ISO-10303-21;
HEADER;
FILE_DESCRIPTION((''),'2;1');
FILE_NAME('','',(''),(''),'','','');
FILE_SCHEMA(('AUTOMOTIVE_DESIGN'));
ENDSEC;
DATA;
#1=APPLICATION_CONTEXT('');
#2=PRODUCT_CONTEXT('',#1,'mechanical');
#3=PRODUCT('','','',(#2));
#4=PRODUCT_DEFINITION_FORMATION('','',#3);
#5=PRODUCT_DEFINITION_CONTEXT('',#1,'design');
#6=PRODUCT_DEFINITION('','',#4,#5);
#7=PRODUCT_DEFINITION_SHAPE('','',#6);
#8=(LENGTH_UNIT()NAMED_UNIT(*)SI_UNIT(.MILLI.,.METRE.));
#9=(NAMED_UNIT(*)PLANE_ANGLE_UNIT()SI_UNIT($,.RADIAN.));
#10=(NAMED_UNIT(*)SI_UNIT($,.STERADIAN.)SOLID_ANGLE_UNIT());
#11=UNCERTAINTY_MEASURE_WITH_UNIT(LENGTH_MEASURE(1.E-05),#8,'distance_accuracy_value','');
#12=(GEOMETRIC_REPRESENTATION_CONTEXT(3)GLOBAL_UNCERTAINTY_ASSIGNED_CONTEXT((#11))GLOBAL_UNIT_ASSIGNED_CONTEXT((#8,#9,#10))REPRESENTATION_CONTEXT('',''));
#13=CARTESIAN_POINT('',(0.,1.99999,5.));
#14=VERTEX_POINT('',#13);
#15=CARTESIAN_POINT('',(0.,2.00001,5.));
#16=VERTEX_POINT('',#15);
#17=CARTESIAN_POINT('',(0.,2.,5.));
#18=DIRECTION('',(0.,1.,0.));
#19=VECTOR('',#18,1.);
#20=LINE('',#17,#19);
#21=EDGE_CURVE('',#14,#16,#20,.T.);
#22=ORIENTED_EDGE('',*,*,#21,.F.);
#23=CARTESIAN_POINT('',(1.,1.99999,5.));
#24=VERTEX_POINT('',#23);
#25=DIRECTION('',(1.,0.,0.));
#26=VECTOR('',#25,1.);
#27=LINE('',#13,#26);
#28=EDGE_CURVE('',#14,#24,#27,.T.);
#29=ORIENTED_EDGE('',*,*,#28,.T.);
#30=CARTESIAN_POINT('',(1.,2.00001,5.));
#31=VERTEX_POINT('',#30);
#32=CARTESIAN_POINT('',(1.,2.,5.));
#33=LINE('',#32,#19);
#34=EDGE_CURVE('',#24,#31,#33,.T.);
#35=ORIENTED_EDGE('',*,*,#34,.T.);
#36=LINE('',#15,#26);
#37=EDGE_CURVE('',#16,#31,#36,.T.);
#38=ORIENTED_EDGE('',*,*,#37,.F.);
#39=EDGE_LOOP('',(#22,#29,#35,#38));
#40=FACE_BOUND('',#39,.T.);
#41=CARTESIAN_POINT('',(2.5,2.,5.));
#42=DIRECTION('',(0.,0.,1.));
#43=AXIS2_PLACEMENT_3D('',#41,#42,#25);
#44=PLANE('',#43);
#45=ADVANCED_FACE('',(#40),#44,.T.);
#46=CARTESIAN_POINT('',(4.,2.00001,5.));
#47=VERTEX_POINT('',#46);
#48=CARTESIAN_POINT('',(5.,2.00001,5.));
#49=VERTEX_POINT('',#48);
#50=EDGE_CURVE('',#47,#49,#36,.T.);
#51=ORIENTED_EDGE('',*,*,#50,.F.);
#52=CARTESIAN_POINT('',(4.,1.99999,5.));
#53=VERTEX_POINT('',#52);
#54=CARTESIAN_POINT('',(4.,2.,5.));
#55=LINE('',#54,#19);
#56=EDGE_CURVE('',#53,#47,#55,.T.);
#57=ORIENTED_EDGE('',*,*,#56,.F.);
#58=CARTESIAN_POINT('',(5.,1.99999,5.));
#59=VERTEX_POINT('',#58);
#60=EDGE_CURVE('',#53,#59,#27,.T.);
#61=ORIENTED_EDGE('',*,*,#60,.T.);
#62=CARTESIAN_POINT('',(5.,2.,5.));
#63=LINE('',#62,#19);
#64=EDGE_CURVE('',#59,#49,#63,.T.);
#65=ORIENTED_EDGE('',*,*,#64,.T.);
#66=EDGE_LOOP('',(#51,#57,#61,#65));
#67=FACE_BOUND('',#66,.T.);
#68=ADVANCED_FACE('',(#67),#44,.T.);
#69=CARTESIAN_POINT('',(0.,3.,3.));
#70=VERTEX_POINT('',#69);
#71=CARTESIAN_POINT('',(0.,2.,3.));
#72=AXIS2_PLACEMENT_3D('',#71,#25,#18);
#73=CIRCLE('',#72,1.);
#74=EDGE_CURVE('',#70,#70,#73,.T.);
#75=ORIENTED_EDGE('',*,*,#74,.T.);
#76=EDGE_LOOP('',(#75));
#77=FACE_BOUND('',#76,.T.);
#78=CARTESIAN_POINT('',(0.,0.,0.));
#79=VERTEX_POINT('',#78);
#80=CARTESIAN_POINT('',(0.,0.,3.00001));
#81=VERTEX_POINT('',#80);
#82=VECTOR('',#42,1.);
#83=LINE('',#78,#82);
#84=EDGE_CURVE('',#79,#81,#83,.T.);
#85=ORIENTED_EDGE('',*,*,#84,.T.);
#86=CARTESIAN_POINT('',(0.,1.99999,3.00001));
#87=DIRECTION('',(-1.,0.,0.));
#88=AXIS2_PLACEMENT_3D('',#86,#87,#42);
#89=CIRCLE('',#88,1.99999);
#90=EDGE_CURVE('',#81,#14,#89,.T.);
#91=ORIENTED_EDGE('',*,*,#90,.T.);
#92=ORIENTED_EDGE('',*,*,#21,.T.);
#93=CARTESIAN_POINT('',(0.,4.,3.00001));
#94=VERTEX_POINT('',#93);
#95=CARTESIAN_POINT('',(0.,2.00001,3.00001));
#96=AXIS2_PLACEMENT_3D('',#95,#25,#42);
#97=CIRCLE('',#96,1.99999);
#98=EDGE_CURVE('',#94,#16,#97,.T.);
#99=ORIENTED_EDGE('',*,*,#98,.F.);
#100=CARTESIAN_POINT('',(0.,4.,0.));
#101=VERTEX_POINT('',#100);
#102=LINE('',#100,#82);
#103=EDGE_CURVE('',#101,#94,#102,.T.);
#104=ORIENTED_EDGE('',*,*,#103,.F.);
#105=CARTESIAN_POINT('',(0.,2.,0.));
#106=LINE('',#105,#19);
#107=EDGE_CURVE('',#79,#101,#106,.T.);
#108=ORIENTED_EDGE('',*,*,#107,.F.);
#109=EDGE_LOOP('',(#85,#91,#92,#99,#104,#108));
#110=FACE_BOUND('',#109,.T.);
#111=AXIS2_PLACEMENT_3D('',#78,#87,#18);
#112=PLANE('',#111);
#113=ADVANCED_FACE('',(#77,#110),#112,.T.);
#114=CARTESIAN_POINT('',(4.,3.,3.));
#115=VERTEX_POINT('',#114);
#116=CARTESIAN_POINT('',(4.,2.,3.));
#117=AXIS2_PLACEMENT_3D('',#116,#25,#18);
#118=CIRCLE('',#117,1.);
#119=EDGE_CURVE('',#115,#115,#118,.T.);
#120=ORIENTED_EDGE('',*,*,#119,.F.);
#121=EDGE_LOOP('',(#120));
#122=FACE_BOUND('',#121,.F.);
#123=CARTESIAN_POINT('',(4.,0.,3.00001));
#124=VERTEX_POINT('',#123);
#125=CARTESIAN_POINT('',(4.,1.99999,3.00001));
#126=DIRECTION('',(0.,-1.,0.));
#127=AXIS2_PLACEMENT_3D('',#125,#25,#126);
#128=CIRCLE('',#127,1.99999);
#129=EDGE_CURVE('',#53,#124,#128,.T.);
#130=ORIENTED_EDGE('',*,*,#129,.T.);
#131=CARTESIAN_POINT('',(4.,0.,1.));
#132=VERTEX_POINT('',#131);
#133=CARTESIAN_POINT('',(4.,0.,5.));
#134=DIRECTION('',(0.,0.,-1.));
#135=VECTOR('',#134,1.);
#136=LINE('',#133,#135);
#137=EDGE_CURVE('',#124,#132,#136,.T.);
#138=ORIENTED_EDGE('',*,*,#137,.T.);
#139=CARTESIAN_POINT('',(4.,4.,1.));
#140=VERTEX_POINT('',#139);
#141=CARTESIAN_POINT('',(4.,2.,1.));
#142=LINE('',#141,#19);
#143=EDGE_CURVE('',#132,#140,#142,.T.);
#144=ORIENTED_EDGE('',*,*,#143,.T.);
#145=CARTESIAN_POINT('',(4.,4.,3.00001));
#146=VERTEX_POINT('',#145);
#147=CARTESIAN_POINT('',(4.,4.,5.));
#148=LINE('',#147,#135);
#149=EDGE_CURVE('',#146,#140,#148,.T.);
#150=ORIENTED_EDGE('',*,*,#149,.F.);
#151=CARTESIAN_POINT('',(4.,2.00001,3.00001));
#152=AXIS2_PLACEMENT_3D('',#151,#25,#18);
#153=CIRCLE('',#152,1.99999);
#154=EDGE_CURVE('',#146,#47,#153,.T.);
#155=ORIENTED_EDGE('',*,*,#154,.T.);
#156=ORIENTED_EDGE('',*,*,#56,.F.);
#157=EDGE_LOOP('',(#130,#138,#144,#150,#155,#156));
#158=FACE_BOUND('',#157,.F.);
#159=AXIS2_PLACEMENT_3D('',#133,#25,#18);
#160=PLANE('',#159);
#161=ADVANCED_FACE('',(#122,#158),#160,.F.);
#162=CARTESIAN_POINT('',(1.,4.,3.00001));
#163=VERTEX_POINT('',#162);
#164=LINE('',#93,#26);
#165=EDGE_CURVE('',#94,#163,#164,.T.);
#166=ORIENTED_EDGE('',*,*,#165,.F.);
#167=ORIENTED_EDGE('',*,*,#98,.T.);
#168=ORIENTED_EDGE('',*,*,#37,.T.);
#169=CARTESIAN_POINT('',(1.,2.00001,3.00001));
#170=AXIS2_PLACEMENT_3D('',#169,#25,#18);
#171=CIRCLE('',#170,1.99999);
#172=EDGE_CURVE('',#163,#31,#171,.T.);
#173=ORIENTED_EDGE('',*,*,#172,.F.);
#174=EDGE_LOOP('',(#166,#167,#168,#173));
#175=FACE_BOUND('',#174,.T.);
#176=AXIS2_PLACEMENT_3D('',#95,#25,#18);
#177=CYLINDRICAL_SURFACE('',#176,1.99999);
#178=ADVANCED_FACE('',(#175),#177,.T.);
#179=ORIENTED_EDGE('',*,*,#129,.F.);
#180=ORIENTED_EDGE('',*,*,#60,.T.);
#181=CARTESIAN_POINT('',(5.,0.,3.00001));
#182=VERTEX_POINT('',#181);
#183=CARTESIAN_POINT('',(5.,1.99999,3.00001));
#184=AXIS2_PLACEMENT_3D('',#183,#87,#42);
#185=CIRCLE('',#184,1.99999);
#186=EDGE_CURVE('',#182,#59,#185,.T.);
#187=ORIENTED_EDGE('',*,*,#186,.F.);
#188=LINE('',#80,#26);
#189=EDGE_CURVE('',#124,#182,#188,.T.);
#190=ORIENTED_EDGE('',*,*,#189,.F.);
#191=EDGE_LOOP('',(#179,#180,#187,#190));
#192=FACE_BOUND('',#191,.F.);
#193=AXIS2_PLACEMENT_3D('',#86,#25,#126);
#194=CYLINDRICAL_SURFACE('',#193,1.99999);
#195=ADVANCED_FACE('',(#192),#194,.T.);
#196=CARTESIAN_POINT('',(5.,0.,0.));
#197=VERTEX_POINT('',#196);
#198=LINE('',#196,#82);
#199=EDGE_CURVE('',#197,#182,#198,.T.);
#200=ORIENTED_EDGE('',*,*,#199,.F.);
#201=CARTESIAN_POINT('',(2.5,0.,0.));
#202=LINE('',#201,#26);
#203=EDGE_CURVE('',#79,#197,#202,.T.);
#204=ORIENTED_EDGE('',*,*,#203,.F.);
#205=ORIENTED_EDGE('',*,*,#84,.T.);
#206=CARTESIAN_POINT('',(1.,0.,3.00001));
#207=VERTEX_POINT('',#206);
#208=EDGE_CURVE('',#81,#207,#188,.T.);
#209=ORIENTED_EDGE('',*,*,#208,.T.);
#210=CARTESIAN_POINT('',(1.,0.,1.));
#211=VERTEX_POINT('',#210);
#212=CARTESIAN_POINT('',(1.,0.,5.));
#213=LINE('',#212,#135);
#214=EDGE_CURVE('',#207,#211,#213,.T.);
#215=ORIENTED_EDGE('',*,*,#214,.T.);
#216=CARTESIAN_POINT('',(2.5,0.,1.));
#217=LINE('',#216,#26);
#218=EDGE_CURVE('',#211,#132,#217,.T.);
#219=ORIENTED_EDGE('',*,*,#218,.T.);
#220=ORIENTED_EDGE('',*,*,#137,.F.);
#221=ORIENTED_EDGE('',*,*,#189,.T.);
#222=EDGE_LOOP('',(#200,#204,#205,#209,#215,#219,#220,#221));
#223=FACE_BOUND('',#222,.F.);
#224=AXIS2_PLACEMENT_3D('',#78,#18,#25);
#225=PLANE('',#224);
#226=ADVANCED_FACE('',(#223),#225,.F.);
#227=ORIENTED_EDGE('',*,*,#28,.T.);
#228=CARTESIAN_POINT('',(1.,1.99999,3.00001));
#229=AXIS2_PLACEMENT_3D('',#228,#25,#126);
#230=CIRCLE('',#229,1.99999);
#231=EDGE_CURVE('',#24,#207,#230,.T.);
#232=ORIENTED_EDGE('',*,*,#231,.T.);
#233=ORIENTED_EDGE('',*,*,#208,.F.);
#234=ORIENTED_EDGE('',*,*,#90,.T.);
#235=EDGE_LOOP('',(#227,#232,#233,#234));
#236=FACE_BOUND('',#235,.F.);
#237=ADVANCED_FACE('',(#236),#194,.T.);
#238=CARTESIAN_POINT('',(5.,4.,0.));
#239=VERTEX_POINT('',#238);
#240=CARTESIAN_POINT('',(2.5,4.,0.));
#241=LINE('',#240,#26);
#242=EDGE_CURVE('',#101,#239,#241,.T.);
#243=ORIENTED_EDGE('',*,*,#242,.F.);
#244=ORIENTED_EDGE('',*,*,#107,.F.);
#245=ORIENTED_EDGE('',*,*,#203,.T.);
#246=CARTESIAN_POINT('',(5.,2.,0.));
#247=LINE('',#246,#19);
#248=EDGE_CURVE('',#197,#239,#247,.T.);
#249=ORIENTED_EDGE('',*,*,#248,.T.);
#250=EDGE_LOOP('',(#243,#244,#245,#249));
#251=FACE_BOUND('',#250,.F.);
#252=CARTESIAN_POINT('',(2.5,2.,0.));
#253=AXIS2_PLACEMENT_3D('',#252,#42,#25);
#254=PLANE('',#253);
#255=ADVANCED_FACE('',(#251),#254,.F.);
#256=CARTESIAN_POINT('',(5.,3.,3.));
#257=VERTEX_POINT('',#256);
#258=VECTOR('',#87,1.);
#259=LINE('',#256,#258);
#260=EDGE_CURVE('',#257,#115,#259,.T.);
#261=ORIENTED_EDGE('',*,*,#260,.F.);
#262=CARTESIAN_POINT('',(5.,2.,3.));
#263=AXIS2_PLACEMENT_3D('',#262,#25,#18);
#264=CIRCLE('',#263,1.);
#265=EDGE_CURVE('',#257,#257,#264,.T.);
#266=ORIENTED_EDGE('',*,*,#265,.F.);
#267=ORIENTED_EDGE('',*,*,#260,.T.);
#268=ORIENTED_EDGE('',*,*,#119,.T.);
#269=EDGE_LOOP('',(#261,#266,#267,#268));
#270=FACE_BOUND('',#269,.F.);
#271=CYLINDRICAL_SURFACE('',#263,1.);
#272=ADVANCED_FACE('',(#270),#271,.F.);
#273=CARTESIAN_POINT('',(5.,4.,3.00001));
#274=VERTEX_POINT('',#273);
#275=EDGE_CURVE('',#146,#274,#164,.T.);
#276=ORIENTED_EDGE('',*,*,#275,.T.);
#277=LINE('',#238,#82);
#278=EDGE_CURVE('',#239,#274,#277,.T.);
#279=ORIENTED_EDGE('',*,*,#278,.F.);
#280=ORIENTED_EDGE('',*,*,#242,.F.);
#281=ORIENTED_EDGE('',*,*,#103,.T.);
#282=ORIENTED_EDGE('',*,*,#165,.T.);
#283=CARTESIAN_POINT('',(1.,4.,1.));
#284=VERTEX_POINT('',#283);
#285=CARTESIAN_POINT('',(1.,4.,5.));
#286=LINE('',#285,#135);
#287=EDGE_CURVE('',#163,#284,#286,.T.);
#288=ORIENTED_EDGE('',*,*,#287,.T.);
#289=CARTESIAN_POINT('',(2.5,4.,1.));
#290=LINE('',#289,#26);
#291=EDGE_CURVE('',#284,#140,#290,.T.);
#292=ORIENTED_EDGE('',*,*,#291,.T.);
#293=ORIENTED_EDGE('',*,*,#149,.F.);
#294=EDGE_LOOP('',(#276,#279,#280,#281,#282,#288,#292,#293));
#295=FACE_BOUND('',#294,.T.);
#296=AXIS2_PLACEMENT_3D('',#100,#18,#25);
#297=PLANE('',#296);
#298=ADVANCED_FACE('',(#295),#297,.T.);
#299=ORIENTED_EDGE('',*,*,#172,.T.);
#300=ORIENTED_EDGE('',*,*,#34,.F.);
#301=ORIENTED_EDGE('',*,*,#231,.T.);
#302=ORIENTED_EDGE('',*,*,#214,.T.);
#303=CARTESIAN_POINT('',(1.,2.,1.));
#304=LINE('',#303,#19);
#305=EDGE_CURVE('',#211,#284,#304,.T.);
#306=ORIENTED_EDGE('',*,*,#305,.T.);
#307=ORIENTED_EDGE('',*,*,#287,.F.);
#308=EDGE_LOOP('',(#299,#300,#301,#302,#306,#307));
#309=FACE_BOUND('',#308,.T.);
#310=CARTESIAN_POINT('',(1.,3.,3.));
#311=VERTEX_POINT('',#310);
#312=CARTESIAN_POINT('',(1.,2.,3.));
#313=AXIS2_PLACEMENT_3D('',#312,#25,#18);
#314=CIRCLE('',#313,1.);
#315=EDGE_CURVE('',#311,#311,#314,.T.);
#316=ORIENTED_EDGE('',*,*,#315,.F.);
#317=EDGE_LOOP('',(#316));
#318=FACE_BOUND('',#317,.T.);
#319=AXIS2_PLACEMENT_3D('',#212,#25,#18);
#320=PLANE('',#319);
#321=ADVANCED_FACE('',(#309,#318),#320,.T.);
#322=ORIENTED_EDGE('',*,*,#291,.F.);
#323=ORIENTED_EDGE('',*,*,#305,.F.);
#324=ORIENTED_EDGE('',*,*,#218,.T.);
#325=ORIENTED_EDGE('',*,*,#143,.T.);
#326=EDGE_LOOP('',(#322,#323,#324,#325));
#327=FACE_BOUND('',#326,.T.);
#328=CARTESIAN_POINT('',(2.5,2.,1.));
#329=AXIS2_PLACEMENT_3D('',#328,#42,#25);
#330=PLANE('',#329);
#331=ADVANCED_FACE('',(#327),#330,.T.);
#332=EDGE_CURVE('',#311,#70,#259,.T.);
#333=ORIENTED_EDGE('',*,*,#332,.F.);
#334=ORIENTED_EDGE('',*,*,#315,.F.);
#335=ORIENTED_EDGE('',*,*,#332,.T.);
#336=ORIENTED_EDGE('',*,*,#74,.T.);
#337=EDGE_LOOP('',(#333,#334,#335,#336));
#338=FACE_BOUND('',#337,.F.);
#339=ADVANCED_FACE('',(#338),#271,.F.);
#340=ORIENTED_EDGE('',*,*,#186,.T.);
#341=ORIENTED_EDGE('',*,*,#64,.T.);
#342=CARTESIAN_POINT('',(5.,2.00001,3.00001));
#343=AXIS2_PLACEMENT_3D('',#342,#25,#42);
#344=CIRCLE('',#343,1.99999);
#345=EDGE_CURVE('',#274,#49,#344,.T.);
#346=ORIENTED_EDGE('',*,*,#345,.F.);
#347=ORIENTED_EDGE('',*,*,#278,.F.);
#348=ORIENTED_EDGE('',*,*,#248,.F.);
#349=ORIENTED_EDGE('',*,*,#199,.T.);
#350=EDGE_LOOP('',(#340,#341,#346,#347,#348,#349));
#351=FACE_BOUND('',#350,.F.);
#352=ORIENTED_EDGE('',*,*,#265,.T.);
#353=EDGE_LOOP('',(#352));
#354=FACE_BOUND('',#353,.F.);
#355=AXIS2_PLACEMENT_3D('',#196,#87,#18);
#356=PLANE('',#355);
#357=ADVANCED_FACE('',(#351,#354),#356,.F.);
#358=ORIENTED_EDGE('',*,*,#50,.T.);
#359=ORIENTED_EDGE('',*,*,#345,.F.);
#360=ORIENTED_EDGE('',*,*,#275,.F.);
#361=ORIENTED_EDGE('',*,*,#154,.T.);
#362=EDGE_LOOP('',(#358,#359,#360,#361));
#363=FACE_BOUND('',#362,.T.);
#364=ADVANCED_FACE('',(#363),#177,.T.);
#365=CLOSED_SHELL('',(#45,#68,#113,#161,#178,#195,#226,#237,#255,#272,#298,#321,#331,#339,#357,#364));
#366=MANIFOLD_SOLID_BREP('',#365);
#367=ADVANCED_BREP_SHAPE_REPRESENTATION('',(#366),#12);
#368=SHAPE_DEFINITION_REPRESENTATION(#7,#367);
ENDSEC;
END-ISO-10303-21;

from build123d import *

# Parameters (mm, degrees)
F0_W     = 5
F0_H     = 4
F1_DEPTH = 5
F2_R     = 1.99999
F3_R     = 1
F4_DEPTH = 25
F7_W     = 3
F7_H     = 4
F8_DEPTH = 4


# Not quite as in the source:
# - a fillet or chamfer is up to 0.001 mm smaller than in the source, because OpenCascade refuses the exact size


with BuildPart() as f1:
    # F0 (on Top) → F1 (new body)
    with BuildSketch(Plane.XY):
        with Locations((2.5, 2)):
            Rectangle(F0_W, F0_H)
    extrude(amount=F1_DEPTH)

    # F2 (radius 2 in the source; OpenCascade refuses exactly that, so slightly less here)
    f2_edges = [f1.edges().sort_by_distance(p)[0] for p in [
        (2.5, 0, 5),
        (2.5, 4, 5),
    ]]
    fillet(f2_edges, radius=F2_R)

    # F3 (on face) → F4 (cut)
    with BuildSketch(Plane.YZ.offset(5)):
        with Locations((2, 3)):
            Circle(F3_R)
    extrude(amount=-F4_DEPTH, mode=Mode.SUBTRACT)

    # F7 (on face) → F8 (cut)
    with BuildSketch(Plane.XY.offset(5)):
        with Locations((2.5, 2)):
            Rectangle(F7_W, F7_H)
    extrude(amount=-F8_DEPTH, mode=Mode.SUBTRACT)


solid = f1.part
